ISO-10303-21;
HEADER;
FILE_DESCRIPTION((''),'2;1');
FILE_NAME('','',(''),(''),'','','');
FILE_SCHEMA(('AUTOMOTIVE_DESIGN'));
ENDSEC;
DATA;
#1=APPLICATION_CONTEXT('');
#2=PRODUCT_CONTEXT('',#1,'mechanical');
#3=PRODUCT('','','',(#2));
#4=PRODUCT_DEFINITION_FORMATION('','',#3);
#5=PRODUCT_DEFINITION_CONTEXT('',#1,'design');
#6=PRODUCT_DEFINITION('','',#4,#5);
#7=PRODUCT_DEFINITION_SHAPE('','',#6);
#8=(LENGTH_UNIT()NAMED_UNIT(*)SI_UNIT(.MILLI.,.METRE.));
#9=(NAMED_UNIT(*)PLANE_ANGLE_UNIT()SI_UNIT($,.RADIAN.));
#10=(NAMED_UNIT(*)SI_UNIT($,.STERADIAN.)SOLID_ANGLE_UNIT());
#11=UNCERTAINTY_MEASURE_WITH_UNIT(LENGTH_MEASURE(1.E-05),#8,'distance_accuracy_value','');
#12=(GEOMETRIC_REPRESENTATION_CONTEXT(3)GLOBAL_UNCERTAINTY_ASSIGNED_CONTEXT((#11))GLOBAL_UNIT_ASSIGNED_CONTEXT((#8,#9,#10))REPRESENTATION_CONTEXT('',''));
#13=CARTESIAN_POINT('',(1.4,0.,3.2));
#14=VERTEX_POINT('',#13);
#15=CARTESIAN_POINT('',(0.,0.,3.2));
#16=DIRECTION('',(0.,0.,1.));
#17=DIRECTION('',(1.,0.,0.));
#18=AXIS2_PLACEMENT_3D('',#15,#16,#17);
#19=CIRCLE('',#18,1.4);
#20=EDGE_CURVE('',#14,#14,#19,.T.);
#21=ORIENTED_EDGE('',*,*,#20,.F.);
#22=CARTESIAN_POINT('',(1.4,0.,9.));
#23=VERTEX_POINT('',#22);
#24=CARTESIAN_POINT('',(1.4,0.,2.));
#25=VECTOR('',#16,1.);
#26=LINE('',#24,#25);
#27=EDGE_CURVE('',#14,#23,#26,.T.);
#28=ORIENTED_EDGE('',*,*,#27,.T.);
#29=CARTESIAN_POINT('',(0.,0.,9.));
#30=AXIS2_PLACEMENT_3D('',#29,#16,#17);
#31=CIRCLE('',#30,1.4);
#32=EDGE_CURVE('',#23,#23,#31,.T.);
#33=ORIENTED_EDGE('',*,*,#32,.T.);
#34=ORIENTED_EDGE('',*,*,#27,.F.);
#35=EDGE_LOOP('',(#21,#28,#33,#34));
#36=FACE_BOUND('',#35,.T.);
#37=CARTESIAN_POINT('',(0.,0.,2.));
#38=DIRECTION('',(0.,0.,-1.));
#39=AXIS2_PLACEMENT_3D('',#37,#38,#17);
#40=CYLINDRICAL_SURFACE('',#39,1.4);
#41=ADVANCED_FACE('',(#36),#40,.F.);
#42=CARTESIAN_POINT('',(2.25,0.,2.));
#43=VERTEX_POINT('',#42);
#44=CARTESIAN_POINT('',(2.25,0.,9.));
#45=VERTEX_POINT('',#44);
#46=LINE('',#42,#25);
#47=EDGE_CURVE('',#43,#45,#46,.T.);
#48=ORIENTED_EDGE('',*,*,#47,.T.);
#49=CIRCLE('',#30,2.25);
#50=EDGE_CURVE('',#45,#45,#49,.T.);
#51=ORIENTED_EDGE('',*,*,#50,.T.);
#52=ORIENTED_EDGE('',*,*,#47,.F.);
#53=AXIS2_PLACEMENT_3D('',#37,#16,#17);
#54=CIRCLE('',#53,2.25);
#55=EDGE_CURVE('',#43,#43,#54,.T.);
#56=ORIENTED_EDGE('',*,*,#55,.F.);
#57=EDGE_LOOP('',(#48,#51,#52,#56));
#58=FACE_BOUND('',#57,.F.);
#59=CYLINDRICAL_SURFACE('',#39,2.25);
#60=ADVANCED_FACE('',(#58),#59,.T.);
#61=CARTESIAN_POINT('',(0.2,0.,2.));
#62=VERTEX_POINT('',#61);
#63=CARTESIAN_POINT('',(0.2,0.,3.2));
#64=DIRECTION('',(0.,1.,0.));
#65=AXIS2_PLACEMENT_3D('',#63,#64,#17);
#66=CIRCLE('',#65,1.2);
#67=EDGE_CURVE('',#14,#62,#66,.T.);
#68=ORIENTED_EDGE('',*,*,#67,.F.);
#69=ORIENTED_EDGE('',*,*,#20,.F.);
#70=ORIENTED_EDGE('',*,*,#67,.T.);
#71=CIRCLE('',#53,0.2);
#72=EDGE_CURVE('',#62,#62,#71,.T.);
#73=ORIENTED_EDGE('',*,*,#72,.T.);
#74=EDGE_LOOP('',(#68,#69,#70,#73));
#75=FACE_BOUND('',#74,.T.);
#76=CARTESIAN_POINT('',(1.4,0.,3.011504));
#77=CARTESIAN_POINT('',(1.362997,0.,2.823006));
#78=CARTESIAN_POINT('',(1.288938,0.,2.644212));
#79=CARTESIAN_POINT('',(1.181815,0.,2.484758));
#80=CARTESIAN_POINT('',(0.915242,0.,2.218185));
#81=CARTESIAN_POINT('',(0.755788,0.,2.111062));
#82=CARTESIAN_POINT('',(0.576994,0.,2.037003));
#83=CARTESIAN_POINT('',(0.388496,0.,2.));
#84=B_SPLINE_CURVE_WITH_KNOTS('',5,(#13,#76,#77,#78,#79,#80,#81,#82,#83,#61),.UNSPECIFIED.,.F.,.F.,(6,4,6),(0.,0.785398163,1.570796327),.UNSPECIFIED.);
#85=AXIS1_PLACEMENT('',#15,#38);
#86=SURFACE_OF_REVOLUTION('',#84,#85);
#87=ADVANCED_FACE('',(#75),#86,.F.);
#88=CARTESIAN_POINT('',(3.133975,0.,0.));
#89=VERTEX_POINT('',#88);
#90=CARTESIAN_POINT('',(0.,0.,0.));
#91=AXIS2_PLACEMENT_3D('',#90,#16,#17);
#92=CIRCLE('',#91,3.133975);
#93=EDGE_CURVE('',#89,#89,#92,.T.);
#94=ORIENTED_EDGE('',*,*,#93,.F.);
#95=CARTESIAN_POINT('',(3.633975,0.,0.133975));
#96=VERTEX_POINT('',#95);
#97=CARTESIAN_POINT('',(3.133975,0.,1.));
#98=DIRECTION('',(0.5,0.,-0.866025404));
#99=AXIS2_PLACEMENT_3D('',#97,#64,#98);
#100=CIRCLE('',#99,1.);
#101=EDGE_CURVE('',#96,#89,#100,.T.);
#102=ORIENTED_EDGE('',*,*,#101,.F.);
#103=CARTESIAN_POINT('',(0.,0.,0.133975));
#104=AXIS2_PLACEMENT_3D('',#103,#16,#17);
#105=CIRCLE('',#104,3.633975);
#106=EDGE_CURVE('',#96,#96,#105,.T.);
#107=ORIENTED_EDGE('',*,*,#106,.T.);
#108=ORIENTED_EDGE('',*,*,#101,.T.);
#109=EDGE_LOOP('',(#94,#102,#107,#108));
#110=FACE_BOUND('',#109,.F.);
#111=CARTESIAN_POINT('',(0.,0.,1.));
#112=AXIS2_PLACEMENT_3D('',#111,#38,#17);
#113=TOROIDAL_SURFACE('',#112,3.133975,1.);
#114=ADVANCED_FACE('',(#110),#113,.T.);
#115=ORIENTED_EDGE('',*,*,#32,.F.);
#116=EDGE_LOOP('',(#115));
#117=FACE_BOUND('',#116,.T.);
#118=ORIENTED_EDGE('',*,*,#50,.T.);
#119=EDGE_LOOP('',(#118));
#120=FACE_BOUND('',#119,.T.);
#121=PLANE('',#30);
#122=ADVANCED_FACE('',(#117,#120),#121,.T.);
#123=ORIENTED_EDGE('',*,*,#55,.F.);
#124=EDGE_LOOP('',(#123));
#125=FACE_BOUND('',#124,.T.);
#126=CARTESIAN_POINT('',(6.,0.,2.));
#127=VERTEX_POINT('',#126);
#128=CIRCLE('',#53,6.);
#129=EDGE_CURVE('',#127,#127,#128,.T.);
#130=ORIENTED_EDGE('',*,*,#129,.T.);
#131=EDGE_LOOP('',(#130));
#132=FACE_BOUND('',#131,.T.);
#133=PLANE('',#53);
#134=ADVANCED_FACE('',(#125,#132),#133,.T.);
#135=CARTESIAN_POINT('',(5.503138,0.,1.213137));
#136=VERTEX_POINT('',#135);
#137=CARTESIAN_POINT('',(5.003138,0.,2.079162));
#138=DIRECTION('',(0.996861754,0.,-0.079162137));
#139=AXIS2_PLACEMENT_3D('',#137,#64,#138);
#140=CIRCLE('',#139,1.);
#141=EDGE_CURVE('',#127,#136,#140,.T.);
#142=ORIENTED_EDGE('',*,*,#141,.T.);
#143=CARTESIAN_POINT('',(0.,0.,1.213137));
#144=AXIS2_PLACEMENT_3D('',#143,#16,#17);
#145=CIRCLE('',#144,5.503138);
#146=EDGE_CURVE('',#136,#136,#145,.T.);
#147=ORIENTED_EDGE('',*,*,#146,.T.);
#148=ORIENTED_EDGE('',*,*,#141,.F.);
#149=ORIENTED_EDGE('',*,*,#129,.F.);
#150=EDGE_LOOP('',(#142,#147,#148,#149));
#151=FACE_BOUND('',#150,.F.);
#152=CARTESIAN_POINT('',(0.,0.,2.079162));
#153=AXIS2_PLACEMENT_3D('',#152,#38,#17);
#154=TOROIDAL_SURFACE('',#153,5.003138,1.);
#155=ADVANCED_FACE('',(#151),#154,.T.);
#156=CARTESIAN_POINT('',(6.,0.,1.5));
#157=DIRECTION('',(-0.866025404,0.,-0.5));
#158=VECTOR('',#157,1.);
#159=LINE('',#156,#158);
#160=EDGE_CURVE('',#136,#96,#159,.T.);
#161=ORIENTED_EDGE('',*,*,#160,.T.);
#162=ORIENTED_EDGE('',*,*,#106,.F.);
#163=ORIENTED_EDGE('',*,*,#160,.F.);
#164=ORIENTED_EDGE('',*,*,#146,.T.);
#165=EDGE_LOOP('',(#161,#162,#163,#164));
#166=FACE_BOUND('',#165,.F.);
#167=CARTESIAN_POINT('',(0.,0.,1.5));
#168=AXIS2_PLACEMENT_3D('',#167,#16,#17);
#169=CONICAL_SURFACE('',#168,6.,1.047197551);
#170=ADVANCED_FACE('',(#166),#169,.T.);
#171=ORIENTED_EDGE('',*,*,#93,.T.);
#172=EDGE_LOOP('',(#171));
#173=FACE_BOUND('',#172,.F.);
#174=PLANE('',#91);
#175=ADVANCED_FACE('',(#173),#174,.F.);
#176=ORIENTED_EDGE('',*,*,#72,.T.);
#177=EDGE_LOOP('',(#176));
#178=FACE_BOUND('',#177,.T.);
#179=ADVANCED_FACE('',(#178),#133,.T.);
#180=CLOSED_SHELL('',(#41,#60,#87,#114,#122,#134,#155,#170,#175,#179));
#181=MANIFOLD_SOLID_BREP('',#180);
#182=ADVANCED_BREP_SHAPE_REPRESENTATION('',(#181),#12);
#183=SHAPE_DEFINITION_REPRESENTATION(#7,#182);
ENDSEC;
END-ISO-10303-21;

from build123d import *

# Parameters (mm, degrees)
F0_R     = 6
F1_DEPTH = 2
F2_SIZE2 = 2.5980762114
F2_SIZE  = 1.5
F4_R     = 2.25
F4_R_2   = 1.4
F5_DEPTH = 7
F6_R     = 1.2


# Not quite as in the source:
# - a fillet or chamfer that OpenCascade refuses, or shapes differently, is made with other operations: its cross-section is extruded or revolved along the edge and cut away or added


with BuildPart() as f1:
    # F0 (on Top) → F1 (new body)
    with BuildSketch(Plane.XY):
        Circle(F0_R)
    extrude(amount=F1_DEPTH)

    # F2
    f2_edges = [f1.edges().sort_by_distance(p)[0] for p in [
        (-6, 0, 0),
    ]]
    f2_side = f1.faces().sort_by_distance((-6, 0, 1))[0]
    chamfer(f2_edges, length=F2_SIZE, length2=F2_SIZE2, reference=f2_side)

    # F3: fillet of radius 1 on 2 edges, made by hand

    # F3_s1 → F3_t2 (revolve, cut)
    with BuildSketch(Plane.XZ):
        with BuildLine():
            ThreePointArc((3.6339745962, 0.1339745962), (3.3927936413, 0.0340741737), (3.1339745962, 0))
            Line((3.1339745962, 0), (3.4019237886, 0))
            Line((3.4019237886, 0), (3.6339745962, 0.1339745962))
        make_face()
    revolve(axis=Axis((0, 0, 0), (0, 0, 1)), mode=Mode.SUBTRACT)

    # F3_s3 → F3_t4 (revolve, cut)
    with BuildSketch(Plane.XZ):
        with BuildLine():
            ThreePointArc((6, 2), (5.8486778537, 1.5452494356), (5.5031382462, 1.2131367327))
            Line((5.5031382462, 1.2131367327), (6, 1.5))
            Line((6, 1.5), (6, 2))
        make_face()
    revolve(axis=Axis((0, 0, 1.5), (0, 0, 1)), mode=Mode.SUBTRACT)

    # F4 (on face) → F5 (join)
    with BuildSketch(Plane.XY.offset(2)):
        Circle(F4_R)
        Circle(F4_R_2, mode=Mode.SUBTRACT)
    extrude(amount=F5_DEPTH)

    # F6
    f6_edges = [f1.edges().sort_by_distance(p)[0] for p in [
        (-1.4, 0, 2),
    ]]
    fillet(f6_edges, radius=F6_R)


solid = f1.part
